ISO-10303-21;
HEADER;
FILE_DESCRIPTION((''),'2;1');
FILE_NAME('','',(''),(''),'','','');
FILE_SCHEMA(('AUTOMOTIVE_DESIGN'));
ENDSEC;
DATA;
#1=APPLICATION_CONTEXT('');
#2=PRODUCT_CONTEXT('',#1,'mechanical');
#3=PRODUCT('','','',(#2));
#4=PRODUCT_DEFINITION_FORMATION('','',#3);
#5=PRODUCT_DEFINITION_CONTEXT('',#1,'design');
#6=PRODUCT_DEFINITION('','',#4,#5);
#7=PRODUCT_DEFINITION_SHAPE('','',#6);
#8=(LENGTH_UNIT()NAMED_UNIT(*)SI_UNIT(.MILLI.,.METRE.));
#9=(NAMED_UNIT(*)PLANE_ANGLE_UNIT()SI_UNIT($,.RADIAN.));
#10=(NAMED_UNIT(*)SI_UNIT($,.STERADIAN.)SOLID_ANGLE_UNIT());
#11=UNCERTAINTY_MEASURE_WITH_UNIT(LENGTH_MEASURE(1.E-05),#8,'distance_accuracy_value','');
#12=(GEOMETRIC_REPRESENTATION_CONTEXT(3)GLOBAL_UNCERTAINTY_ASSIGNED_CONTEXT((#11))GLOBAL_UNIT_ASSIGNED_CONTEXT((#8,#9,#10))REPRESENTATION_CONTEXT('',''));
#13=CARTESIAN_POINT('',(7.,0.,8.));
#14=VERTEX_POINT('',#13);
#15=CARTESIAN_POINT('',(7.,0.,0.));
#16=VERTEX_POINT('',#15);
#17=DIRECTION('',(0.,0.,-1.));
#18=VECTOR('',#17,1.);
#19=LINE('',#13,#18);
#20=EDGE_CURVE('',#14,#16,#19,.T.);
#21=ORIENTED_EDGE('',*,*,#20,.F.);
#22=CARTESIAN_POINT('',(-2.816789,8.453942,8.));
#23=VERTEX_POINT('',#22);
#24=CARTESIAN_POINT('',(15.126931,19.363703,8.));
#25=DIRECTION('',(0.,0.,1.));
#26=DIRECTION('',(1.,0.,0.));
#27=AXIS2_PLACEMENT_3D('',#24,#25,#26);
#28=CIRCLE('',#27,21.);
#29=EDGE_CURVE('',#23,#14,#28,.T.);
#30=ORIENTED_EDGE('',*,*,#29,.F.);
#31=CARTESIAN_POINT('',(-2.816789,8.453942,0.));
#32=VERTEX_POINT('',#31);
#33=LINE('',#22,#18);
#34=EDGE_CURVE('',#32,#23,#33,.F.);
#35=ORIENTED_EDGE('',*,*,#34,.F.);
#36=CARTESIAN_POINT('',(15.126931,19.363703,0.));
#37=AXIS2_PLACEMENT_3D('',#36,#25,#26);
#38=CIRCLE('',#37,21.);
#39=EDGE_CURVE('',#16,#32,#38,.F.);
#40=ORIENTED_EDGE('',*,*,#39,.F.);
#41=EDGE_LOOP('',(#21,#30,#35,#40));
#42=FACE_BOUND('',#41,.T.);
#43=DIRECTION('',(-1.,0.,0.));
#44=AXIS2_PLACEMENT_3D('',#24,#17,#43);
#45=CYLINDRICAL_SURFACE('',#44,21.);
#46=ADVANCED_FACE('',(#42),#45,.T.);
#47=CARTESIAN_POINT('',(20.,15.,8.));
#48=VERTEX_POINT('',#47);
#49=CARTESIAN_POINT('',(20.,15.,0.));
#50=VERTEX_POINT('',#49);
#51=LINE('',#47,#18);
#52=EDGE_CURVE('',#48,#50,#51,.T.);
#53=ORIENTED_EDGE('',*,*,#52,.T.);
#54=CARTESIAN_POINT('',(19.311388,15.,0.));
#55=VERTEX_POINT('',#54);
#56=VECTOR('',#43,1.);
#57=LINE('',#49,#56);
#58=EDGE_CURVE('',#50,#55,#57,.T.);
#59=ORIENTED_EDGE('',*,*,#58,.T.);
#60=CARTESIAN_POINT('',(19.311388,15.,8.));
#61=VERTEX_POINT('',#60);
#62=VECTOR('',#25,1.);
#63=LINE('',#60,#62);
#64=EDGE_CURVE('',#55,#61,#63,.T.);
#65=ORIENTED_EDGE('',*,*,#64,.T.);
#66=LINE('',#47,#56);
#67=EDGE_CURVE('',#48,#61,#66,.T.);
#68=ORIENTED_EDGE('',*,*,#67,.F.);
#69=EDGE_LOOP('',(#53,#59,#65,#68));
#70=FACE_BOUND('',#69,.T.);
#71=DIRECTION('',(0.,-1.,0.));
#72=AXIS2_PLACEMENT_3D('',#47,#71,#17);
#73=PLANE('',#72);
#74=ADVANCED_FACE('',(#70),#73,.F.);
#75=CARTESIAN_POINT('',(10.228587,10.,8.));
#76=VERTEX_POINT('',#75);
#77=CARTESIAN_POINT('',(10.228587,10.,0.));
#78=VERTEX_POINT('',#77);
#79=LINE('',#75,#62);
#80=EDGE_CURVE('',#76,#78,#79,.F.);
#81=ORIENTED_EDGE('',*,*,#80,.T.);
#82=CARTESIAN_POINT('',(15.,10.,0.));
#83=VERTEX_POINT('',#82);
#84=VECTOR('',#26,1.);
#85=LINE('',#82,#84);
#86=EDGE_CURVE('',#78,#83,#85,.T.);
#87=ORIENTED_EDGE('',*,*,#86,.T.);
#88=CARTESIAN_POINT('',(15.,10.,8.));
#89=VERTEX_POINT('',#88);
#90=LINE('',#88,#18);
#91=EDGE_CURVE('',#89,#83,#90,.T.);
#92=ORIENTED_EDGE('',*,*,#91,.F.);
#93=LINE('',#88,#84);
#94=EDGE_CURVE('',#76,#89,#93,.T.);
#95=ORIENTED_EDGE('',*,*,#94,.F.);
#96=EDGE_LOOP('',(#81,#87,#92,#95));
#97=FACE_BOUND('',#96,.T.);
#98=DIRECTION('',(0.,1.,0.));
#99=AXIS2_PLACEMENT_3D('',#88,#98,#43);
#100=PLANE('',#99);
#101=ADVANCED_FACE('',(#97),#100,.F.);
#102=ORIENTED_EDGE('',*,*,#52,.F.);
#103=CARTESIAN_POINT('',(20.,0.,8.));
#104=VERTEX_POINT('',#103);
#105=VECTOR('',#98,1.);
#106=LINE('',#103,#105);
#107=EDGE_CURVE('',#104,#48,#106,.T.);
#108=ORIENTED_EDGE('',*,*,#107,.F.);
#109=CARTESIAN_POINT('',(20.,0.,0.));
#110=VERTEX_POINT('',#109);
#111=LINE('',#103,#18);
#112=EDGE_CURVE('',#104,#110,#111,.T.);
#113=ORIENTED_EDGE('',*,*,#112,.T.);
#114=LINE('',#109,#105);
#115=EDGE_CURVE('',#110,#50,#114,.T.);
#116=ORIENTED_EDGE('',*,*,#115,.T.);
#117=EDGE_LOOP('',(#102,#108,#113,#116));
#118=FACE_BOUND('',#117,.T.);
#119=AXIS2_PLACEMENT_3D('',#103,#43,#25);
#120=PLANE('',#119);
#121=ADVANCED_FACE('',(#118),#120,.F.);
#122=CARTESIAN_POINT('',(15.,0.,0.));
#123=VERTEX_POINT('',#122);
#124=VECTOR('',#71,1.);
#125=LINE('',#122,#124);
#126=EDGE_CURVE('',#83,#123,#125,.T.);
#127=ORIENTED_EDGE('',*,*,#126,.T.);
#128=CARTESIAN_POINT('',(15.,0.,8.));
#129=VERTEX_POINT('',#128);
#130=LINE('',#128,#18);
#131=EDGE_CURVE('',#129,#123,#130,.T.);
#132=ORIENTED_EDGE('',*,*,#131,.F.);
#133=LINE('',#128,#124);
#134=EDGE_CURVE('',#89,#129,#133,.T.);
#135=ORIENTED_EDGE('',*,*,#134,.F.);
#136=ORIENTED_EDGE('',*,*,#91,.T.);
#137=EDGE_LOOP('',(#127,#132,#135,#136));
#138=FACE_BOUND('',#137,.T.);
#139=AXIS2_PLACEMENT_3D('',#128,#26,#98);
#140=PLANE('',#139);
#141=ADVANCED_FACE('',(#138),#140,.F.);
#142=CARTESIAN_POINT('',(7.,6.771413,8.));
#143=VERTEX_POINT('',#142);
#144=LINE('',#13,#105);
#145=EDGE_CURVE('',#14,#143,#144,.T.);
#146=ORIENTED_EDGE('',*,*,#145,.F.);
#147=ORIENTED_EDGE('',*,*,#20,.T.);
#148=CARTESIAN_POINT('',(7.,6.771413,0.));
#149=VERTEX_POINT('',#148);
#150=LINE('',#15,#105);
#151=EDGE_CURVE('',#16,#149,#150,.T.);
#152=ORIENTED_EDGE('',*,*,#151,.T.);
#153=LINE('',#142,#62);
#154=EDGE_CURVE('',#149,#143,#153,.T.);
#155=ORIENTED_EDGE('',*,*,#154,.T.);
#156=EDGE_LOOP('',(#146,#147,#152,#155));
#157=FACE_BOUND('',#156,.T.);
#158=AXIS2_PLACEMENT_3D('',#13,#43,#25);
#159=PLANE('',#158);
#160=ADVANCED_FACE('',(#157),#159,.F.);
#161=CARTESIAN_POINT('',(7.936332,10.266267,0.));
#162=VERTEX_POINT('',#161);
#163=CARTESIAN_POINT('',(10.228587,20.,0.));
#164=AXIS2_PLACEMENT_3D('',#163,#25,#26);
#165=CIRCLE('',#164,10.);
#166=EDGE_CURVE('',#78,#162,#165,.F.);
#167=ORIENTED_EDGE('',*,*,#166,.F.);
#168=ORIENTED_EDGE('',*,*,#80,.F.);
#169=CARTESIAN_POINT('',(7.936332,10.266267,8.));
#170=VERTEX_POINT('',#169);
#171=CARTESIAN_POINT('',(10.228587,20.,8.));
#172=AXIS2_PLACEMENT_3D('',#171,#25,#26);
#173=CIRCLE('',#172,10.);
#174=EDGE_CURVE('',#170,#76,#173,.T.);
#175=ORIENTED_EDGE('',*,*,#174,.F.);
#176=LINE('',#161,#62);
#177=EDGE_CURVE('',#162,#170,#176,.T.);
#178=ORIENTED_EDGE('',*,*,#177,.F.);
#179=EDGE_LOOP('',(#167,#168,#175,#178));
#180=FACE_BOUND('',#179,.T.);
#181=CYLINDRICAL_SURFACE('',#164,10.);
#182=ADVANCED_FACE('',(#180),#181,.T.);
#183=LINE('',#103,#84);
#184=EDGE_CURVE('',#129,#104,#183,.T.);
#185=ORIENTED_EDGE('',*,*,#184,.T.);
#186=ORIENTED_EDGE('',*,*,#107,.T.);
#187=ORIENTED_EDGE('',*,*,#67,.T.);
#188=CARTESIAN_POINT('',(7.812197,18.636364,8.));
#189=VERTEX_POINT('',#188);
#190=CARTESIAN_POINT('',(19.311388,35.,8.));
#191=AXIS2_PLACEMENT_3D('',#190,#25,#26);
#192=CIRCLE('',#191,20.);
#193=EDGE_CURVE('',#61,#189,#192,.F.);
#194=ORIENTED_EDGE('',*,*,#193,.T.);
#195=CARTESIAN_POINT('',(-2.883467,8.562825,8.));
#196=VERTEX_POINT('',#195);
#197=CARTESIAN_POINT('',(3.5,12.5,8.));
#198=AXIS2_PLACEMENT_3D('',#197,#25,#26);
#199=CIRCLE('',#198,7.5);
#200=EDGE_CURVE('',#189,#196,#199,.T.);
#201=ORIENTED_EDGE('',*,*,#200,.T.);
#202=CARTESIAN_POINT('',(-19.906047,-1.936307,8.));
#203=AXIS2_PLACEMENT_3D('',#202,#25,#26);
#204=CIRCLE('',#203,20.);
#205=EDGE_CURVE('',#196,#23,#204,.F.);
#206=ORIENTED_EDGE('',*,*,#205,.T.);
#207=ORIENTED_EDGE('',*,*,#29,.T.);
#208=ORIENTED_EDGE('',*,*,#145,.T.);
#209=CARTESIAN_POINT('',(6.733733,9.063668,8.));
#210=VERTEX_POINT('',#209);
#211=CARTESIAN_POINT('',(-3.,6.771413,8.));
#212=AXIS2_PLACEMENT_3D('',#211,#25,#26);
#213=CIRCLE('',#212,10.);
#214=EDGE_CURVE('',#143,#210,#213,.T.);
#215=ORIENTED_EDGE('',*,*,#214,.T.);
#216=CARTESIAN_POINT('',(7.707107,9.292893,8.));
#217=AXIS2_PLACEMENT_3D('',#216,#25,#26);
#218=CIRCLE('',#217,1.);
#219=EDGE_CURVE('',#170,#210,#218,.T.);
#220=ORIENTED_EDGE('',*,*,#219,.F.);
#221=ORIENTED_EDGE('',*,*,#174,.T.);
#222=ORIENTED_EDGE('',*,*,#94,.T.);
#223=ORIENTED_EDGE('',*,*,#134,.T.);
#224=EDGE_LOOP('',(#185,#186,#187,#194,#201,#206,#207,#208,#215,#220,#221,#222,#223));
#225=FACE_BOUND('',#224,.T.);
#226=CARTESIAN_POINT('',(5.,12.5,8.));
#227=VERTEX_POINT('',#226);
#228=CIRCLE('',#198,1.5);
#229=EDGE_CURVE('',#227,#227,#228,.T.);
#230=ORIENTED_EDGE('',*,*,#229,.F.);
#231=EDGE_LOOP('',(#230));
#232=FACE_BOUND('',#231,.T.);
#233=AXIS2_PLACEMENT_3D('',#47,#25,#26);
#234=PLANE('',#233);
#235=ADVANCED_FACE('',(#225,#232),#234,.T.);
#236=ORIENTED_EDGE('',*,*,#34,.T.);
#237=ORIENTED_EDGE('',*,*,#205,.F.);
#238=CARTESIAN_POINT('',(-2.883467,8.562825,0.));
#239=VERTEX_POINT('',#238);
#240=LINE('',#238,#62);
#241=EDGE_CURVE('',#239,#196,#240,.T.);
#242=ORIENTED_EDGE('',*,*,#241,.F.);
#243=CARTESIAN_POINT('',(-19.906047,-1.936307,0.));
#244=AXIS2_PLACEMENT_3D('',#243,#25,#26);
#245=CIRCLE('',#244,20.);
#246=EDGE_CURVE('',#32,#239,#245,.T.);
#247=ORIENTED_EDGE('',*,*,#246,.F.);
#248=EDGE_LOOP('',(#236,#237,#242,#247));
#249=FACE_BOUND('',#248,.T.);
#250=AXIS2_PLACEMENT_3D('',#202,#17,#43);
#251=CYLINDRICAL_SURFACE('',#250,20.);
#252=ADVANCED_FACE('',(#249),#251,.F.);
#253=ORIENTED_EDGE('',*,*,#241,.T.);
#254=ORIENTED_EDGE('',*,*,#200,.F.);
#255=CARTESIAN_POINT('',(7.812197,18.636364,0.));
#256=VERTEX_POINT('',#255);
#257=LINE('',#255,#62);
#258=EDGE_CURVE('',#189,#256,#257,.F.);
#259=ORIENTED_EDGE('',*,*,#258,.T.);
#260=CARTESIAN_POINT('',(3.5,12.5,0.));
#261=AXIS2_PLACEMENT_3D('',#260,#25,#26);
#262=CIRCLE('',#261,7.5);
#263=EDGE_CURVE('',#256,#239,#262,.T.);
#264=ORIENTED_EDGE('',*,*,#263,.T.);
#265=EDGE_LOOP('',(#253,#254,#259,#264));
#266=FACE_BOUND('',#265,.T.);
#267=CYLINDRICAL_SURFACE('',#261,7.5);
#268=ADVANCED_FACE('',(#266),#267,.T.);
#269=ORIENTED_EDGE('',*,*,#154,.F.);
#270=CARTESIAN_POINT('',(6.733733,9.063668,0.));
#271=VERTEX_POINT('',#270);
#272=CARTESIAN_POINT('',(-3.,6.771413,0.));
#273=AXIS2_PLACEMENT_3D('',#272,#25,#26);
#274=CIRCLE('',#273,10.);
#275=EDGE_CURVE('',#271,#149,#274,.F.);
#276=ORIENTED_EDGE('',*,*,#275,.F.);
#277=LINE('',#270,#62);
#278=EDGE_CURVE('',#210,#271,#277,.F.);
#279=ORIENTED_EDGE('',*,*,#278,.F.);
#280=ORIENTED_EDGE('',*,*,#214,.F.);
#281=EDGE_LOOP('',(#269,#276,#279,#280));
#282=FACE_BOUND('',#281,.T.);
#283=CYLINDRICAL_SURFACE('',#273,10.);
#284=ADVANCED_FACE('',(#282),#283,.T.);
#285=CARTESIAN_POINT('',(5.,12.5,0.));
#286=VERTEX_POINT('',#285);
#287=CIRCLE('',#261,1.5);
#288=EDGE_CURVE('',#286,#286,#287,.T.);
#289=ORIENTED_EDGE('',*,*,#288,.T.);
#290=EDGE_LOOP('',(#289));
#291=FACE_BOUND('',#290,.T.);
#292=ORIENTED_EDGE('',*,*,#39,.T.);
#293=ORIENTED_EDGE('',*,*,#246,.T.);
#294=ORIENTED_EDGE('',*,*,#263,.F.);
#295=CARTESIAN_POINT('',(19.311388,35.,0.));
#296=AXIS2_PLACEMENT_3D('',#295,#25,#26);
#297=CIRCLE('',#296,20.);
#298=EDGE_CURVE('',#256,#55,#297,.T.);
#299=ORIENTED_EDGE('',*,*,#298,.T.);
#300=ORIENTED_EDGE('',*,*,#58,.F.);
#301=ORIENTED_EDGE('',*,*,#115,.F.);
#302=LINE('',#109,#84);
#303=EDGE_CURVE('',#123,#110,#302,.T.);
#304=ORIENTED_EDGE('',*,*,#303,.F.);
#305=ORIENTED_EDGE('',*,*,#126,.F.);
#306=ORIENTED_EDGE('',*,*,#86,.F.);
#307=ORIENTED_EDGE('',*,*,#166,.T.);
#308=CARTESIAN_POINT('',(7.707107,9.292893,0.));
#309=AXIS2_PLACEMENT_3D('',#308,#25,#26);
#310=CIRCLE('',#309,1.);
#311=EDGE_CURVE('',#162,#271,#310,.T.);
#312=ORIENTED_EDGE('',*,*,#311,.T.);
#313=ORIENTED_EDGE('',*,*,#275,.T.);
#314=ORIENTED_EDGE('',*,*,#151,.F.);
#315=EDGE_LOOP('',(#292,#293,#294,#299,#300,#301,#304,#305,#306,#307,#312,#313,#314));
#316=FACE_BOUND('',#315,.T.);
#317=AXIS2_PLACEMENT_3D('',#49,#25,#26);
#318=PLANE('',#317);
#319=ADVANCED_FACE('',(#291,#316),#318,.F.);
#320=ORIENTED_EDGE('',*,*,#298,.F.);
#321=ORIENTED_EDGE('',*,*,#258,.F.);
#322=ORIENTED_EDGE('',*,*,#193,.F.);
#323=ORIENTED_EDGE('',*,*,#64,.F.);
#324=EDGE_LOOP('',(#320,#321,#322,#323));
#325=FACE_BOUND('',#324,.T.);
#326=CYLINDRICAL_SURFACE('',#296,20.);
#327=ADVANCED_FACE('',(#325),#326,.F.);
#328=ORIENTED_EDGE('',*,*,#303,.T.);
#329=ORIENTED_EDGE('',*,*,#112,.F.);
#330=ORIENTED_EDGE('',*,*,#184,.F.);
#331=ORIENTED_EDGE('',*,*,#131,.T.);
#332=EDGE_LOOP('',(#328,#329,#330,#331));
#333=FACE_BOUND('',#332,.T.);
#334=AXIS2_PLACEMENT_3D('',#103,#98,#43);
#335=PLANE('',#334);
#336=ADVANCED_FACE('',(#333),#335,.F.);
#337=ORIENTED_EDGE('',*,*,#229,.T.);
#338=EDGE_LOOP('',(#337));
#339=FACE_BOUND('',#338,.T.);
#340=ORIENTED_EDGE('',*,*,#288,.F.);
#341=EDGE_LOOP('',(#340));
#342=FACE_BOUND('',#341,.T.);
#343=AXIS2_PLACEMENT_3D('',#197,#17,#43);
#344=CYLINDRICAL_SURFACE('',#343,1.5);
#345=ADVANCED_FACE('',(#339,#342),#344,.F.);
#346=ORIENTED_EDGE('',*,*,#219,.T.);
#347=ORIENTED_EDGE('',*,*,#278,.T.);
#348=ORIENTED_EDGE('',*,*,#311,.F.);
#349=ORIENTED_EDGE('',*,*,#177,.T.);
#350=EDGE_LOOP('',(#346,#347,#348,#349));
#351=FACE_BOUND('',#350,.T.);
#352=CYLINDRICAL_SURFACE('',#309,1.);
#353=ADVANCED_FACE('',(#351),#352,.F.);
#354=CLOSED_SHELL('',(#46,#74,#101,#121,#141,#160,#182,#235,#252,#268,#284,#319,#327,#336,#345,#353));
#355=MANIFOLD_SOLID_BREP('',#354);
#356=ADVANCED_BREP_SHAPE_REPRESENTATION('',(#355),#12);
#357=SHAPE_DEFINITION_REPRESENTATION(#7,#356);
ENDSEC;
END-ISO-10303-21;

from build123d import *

# Parameters (mm, degrees)
SKETCH1_R           = 1.5
BOSS_EXTRUDE1_DEPTH = 8
SKETCH2_R           = 1
CUT_EXTRUDE1_DEPTH  = 27.248809497
FILLET1_R           = 10
BOSS_EXTRUDE2_DEPTH = 8
FILLET2_R           = 20
FILLET3_R           = 21


with BuildPart() as part:
    # Sketch1 → Boss-Extrude1 (new body)
    with BuildSketch(Plane.XY):
        Polygon((20, 0), (15, 0), (15, 10), (7, 10), (7, 0), (0, 0), (0, 15), (20, 15), align=None)
        with Locations((3.5, 12.5)):
            Circle(SKETCH1_R, mode=Mode.SUBTRACT)
    extrude(amount=BOSS_EXTRUDE1_DEPTH)

    # Sketch2 → Cut-Extrude1 (cut, through all)
    with BuildSketch(Plane.XY.offset(8)):
        with Locations((7.707106781, 9.292893219)):
            Circle(SKETCH2_R)
    extrude(amount=-CUT_EXTRUDE1_DEPTH, mode=Mode.SUBTRACT)

    # Fillet1
    fillet1_edges = [part.edges().sort_by_distance(p)[0] for p in [
        (8.414213562, 10, 4),
        (7, 8.585786438, 4),
    ]]
    fillet(fillet1_edges, radius=FILLET1_R)

    # Sketch3 → Boss-Extrude2 (add)
    with BuildSketch(Plane.XY.offset(8)):
        with BuildLine():
            Line((0, 15), (10.571067812, 15))
            ThreePointArc((10.571067812, 15), (-1.403283931, 18.175192217), (0, 5.866750419))
            Line((0, 5.866750419), (0, 15))
        make_face()
    extrude(amount=-BOSS_EXTRUDE2_DEPTH)

    # Fillet2
    # the kernel refuses this fillet: 20 mm, written as the material it adds along each edge
    with BuildSketch(Plane(origin=(10.571067812, 15, 8), x_dir=(1, 0, 0), z_dir=(0, 0, -1))) as fillet2_piece_1:
        with BuildLine():
            CenterArc((8.740320489, -20), FILLET2_R, 90, 35.096801228)
            Line((-2.758871003, -3.636363636), (-2.988854832, -3.309090909))
            ThreePointArc((-2.988854832, -3.309090909), (-1.414747274, -1.791391146), (-0.377123617, 0.133333333))
            Line((-0.377123617, 0.133333333), (0, 0.4))
            Line((0, 0.4), (8.740320489, 0.4))
            Line((8.740320489, 0.4), (8.740320489, 0))
        make_face()
    extrude(amount=8)
    with BuildSketch(Plane(origin=(0, 5.866750419, 8), x_dir=(0, -1, 0), z_dir=(0, 0, -1))) as fillet2_piece_2:
        with BuildLine():
            CenterArc((7.803057197, 19.906047223), FILLET2_R, 238.334677688, 26.109509541)
            Line((-2.696075005, 2.883467425), (-2.906057649, 2.543015829))
            ThreePointArc((-2.906057649, 2.543015829), (-1.447100359, 1.349108809), (-0.353773311, -0.186666667))
            Line((-0.353773311, -0.186666667), (0, -0.4))
            ThreePointArc((0, -0.4), (2.93337521, -0.4), (5.828024284, -0.398120944))
            Line((5.828024284, -0.398120944), (5.866750419, 0))
        make_face()
    extrude(amount=8)

    # Fillet3
    # the kernel refuses this fillet: 21 mm, written as the material it takes off along each edge
    with BuildSketch(Plane(origin=(0, 0, -22.27715114), x_dir=(-0.3161074470851615, 0.9487233958838066, 0), z_dir=(0, 0, 1))) as fillet3_piece_1:
        with BuildLine():
            CenterArc((13.589062195, -20.472284398), FILLET3_R, 102.871869537, 35.932692131)
            Line((-2.21275213, -6.641063771), (-2.528788416, -6.364439359))
            ThreePointArc((-2.528788416, -6.364439359), (-1.504839891, -3.187766758), (-0.398463826, 0.132765128))
            Line((-0.398463826, 0.132765128), (0.093564035, 0.409445688))
            ThreePointArc((0.093564035, 0.409445688), (4.455430228, -0.082586287), (8.817296421, 0.409445688))
            Line((8.817296421, 0.409445688), (8.910860456, 0))
        make_face()
    extrude(amount=52.55430228, mode=Mode.SUBTRACT)


solid = part.part
